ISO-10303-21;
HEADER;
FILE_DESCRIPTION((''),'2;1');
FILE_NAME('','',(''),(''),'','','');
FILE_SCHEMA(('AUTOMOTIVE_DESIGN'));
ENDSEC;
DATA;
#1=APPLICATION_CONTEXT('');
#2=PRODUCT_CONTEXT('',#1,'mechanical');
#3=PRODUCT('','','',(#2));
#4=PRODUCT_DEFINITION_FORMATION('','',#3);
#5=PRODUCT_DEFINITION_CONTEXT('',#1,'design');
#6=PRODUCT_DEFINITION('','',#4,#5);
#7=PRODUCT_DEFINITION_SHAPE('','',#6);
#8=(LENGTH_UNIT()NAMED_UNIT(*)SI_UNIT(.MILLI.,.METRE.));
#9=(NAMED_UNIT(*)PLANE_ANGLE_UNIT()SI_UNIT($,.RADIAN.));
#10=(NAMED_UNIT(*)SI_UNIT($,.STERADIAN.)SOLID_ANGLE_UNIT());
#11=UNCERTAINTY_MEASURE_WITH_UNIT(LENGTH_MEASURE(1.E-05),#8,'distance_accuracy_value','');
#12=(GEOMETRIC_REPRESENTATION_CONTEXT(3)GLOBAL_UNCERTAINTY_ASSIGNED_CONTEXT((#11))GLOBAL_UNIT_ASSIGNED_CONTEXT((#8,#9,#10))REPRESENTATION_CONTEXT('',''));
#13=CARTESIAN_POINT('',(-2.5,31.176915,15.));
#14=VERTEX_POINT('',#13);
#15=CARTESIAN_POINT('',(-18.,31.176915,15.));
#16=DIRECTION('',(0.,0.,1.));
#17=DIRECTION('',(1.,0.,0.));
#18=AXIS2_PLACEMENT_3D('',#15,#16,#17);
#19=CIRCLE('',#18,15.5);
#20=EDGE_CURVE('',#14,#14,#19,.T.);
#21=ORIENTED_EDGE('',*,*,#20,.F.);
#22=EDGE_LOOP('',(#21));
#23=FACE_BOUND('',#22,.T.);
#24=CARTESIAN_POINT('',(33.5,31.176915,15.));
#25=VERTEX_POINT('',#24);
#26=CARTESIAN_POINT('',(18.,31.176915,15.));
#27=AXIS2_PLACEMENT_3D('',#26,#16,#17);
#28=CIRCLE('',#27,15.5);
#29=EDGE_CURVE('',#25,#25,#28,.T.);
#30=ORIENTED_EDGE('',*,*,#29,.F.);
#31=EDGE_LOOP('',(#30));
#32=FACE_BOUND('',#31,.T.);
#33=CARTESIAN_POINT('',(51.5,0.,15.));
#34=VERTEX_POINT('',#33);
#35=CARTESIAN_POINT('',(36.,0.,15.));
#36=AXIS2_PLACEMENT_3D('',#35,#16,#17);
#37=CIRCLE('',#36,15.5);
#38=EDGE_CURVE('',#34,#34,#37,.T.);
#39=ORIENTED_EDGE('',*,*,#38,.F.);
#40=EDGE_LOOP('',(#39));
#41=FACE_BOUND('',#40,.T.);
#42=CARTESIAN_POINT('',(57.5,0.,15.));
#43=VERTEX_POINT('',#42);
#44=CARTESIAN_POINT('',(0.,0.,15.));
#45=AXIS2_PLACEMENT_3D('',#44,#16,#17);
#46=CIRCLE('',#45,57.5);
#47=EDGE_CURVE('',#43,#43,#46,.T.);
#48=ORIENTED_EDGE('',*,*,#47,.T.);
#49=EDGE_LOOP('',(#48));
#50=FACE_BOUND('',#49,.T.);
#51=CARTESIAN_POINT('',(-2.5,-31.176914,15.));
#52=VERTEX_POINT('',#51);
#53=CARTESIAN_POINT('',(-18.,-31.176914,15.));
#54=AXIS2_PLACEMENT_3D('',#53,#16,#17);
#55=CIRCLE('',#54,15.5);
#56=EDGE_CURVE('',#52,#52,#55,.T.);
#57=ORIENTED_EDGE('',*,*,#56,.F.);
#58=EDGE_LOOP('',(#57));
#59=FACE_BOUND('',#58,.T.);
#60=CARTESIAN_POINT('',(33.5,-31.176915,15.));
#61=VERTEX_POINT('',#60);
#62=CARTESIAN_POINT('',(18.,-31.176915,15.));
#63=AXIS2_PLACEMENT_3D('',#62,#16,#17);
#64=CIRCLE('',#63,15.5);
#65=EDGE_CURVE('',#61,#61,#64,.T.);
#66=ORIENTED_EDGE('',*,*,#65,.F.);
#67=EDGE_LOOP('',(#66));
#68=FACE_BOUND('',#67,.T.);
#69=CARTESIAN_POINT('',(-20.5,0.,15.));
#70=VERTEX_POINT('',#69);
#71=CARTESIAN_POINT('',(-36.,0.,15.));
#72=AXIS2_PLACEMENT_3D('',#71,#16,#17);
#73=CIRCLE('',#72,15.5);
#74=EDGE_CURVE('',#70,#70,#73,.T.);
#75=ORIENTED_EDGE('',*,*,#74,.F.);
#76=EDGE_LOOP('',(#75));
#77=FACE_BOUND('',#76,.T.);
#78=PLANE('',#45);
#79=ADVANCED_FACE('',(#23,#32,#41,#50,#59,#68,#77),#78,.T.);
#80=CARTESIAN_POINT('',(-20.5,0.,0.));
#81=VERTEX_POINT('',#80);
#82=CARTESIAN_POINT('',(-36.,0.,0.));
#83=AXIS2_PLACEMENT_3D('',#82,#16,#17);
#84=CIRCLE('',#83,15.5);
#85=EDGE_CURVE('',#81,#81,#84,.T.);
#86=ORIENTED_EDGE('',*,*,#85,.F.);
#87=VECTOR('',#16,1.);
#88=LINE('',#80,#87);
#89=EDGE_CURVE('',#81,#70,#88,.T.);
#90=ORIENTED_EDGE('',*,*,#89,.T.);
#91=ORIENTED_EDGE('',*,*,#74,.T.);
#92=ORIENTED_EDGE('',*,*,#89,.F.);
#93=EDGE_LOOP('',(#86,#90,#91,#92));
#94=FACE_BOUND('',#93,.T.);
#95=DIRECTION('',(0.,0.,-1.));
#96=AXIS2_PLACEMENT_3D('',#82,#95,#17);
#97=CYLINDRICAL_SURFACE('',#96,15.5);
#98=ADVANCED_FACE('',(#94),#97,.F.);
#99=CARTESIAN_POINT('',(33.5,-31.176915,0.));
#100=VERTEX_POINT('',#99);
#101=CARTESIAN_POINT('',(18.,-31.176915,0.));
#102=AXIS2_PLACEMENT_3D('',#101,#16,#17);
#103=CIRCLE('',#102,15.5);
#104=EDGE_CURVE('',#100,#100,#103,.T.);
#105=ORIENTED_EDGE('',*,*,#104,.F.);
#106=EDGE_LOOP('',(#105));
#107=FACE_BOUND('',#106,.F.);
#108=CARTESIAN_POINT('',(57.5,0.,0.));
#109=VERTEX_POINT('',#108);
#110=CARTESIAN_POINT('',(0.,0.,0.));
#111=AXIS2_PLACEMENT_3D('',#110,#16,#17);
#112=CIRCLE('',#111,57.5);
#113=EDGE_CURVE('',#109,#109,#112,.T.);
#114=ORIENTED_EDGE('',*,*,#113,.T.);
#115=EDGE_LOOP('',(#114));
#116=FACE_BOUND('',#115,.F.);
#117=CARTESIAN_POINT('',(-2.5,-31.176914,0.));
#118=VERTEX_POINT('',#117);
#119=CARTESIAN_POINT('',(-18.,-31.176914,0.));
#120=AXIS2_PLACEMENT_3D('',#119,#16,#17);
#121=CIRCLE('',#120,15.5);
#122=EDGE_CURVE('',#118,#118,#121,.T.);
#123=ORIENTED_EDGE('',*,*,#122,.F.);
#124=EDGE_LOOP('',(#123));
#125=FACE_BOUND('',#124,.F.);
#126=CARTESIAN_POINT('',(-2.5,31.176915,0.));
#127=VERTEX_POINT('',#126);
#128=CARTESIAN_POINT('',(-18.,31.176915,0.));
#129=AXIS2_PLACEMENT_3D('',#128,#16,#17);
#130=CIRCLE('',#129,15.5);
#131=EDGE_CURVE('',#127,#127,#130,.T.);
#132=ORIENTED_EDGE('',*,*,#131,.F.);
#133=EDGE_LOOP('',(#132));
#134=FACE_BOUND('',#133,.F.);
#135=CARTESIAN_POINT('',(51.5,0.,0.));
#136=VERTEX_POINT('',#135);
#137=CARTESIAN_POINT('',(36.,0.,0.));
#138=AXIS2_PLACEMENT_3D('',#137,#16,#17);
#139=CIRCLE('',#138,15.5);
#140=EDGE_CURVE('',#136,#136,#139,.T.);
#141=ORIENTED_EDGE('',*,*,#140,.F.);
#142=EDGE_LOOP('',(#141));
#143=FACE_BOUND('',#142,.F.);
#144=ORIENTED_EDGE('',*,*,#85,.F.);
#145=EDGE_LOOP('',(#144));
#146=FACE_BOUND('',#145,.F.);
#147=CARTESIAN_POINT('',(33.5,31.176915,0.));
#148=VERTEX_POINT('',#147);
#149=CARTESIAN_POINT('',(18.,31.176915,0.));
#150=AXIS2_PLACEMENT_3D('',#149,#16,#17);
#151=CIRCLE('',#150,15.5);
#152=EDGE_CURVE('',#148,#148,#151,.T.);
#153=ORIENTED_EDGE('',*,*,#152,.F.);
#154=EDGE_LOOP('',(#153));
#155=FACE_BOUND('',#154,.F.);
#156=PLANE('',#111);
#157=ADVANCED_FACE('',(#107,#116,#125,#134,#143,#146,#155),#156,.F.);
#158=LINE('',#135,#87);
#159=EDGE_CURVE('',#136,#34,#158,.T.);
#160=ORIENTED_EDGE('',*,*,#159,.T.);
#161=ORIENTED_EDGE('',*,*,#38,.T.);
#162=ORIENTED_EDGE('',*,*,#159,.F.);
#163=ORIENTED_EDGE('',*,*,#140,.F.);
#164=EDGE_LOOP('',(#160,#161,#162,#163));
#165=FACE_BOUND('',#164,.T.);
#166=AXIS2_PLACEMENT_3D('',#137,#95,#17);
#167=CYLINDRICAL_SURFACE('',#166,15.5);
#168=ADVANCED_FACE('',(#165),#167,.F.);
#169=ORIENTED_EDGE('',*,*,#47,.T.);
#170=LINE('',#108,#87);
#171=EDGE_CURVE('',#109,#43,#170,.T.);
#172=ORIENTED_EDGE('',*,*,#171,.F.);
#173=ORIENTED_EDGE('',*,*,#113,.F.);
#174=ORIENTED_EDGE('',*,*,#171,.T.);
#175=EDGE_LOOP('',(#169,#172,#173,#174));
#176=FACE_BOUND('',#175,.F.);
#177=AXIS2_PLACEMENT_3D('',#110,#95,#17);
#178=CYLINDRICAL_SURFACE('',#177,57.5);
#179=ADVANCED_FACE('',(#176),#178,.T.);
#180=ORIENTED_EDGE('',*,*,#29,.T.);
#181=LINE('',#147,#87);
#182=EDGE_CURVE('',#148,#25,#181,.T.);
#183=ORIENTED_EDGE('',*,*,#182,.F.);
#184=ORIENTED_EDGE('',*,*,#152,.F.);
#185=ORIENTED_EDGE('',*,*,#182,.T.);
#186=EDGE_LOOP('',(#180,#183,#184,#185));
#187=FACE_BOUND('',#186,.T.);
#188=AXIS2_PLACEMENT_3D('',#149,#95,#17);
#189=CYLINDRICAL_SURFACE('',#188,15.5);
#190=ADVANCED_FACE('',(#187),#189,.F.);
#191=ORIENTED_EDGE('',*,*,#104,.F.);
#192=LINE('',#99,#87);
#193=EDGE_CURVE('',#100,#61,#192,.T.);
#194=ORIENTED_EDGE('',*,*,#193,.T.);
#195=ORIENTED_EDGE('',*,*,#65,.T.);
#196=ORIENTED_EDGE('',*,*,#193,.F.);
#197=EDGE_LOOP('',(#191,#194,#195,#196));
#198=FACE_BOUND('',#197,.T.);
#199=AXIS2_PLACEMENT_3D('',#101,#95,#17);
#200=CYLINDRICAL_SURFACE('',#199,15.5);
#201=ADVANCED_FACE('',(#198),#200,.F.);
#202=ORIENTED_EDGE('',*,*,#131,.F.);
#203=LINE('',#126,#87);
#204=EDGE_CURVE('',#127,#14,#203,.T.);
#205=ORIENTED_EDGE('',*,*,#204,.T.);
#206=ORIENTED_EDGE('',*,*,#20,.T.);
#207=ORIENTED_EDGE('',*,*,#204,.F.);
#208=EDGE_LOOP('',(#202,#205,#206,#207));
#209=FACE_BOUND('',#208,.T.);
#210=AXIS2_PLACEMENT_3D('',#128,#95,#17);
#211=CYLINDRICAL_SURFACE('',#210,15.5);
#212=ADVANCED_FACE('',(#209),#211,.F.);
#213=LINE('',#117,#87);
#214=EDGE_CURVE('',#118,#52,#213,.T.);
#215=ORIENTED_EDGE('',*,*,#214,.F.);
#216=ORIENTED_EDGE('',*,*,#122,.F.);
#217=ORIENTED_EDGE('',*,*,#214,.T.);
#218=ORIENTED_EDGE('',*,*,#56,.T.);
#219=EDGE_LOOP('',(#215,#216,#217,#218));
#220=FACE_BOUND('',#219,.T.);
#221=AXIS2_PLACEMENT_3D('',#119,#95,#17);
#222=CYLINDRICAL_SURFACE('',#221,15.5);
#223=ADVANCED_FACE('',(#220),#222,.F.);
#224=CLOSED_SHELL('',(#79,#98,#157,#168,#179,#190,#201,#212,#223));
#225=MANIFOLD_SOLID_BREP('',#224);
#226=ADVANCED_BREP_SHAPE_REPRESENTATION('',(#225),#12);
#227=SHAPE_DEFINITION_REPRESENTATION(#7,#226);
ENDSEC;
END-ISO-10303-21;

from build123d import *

# Parameters (mm, degrees)
F0_R     = 57.5
F0_R_2   = 15.5
F1_DEPTH = 15


# Not quite as in the source:
# - a feature of the source that left no trace in its solid (it failed there, or was rolled back) is left out


with BuildPart() as f1:
    # F0 (on Top) → F1 (new body)
    with BuildSketch(Plane.XY):
        Circle(F0_R)
        with Locations((-18.0000001252, -31.1769144639)):
            Circle(F0_R_2, mode=Mode.SUBTRACT)
        with Locations((17.9999998998, -31.1769145941)):
            Circle(F0_R_2, mode=Mode.SUBTRACT)
        with Locations((36, -8.68e-08)):
            Circle(F0_R_2, mode=Mode.SUBTRACT)
        with Locations((-36, 0)):
            Circle(F0_R_2, mode=Mode.SUBTRACT)
        with Locations((-17.999999975, 31.1769145507)):
            Circle(F0_R_2, mode=Mode.SUBTRACT)
        with Locations((18.0000000501, 31.1769145073)):
            Circle(F0_R_2, mode=Mode.SUBTRACT)
    extrude(amount=F1_DEPTH)


solid = f1.part
